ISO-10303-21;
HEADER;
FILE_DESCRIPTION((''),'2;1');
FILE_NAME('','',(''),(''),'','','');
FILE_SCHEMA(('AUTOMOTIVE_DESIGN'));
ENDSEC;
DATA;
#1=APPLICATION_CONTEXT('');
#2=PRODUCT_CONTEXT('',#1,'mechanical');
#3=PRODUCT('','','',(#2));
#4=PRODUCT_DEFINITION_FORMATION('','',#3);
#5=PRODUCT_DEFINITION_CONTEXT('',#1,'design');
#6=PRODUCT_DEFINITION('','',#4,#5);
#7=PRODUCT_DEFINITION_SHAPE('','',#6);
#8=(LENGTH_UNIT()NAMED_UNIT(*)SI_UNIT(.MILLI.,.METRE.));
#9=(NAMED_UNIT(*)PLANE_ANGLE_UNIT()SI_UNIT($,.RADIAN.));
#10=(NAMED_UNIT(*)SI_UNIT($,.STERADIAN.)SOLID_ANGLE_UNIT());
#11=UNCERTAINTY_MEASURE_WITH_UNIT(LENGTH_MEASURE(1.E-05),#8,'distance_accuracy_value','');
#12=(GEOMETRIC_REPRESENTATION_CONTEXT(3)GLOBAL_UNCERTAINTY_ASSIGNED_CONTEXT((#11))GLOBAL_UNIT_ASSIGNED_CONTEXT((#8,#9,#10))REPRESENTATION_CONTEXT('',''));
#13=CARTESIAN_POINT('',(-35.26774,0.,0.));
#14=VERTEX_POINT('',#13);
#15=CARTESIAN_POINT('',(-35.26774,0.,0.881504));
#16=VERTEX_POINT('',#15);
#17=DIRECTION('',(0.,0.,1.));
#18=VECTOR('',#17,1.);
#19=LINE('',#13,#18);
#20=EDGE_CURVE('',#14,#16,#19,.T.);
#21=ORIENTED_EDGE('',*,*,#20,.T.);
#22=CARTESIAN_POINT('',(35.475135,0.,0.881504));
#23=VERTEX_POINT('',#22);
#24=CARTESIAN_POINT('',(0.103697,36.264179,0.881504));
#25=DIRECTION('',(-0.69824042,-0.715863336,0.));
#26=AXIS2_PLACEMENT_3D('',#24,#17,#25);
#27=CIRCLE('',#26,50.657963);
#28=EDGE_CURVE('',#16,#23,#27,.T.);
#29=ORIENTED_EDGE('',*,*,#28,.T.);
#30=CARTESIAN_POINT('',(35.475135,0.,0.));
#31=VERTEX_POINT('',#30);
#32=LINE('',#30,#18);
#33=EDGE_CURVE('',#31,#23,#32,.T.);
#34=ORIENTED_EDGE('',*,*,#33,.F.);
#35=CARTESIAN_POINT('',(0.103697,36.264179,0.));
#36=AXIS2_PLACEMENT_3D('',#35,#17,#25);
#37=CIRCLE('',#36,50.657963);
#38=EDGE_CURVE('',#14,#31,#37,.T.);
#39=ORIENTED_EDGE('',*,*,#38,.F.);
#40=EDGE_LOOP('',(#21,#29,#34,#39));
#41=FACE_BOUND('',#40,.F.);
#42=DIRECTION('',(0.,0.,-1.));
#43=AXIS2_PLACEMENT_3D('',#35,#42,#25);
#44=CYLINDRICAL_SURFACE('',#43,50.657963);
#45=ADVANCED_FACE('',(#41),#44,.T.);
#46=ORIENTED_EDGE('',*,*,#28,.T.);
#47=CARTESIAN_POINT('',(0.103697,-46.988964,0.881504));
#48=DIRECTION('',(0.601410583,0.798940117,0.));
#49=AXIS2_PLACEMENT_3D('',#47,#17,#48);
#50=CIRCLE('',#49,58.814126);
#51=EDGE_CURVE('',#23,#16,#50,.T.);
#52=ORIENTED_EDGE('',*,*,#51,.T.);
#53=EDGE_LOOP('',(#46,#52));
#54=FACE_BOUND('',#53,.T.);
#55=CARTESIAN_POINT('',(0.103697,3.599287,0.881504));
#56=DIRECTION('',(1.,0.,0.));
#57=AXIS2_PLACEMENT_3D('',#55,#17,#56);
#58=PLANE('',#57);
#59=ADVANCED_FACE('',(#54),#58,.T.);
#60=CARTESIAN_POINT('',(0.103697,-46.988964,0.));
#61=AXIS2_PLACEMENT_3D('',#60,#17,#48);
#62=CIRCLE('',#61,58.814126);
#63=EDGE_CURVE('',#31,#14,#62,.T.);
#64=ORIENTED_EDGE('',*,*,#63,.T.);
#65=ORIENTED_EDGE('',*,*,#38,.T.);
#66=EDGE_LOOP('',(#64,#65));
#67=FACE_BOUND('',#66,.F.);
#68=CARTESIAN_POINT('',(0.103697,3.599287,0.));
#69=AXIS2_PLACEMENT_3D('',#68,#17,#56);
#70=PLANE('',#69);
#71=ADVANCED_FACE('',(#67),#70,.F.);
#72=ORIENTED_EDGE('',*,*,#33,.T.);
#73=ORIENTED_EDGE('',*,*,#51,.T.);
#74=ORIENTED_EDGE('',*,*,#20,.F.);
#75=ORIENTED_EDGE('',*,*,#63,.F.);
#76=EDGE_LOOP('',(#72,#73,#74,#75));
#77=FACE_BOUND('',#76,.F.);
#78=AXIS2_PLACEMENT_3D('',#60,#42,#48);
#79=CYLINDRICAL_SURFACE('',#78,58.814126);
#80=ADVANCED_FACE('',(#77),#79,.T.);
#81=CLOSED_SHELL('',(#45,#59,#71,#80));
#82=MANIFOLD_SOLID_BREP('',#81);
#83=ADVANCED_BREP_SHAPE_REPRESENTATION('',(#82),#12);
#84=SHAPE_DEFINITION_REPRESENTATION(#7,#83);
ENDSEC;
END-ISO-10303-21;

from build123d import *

# Parameters (mm, degrees)
F2_DEPTH = 0.8815038018


# Not quite as in the source:
# - the program builds the solid bodies; features that only make, move or delete a surface that nothing else refers to are left out


with BuildPart() as f2:
    # F0 (on Top) → F2 (new body)
    with BuildSketch(Plane.XY):
        with BuildLine():
            ThreePointArc((35.4751348495, 0), (0.1036971807, 11.8251612538), (-35.2677404881, 0))
            Line((-35.2677404881, 0), (35.4751348495, 0))
        make_face()
        with BuildLine():
            Line((35.4751348495, 0), (-35.2677404881, 0))
            ThreePointArc((-35.2677404881, 0), (0.1036971807, -14.3937847459), (35.4751348495, 0))
        make_face()
    extrude(amount=F2_DEPTH)


solid = f2.part
